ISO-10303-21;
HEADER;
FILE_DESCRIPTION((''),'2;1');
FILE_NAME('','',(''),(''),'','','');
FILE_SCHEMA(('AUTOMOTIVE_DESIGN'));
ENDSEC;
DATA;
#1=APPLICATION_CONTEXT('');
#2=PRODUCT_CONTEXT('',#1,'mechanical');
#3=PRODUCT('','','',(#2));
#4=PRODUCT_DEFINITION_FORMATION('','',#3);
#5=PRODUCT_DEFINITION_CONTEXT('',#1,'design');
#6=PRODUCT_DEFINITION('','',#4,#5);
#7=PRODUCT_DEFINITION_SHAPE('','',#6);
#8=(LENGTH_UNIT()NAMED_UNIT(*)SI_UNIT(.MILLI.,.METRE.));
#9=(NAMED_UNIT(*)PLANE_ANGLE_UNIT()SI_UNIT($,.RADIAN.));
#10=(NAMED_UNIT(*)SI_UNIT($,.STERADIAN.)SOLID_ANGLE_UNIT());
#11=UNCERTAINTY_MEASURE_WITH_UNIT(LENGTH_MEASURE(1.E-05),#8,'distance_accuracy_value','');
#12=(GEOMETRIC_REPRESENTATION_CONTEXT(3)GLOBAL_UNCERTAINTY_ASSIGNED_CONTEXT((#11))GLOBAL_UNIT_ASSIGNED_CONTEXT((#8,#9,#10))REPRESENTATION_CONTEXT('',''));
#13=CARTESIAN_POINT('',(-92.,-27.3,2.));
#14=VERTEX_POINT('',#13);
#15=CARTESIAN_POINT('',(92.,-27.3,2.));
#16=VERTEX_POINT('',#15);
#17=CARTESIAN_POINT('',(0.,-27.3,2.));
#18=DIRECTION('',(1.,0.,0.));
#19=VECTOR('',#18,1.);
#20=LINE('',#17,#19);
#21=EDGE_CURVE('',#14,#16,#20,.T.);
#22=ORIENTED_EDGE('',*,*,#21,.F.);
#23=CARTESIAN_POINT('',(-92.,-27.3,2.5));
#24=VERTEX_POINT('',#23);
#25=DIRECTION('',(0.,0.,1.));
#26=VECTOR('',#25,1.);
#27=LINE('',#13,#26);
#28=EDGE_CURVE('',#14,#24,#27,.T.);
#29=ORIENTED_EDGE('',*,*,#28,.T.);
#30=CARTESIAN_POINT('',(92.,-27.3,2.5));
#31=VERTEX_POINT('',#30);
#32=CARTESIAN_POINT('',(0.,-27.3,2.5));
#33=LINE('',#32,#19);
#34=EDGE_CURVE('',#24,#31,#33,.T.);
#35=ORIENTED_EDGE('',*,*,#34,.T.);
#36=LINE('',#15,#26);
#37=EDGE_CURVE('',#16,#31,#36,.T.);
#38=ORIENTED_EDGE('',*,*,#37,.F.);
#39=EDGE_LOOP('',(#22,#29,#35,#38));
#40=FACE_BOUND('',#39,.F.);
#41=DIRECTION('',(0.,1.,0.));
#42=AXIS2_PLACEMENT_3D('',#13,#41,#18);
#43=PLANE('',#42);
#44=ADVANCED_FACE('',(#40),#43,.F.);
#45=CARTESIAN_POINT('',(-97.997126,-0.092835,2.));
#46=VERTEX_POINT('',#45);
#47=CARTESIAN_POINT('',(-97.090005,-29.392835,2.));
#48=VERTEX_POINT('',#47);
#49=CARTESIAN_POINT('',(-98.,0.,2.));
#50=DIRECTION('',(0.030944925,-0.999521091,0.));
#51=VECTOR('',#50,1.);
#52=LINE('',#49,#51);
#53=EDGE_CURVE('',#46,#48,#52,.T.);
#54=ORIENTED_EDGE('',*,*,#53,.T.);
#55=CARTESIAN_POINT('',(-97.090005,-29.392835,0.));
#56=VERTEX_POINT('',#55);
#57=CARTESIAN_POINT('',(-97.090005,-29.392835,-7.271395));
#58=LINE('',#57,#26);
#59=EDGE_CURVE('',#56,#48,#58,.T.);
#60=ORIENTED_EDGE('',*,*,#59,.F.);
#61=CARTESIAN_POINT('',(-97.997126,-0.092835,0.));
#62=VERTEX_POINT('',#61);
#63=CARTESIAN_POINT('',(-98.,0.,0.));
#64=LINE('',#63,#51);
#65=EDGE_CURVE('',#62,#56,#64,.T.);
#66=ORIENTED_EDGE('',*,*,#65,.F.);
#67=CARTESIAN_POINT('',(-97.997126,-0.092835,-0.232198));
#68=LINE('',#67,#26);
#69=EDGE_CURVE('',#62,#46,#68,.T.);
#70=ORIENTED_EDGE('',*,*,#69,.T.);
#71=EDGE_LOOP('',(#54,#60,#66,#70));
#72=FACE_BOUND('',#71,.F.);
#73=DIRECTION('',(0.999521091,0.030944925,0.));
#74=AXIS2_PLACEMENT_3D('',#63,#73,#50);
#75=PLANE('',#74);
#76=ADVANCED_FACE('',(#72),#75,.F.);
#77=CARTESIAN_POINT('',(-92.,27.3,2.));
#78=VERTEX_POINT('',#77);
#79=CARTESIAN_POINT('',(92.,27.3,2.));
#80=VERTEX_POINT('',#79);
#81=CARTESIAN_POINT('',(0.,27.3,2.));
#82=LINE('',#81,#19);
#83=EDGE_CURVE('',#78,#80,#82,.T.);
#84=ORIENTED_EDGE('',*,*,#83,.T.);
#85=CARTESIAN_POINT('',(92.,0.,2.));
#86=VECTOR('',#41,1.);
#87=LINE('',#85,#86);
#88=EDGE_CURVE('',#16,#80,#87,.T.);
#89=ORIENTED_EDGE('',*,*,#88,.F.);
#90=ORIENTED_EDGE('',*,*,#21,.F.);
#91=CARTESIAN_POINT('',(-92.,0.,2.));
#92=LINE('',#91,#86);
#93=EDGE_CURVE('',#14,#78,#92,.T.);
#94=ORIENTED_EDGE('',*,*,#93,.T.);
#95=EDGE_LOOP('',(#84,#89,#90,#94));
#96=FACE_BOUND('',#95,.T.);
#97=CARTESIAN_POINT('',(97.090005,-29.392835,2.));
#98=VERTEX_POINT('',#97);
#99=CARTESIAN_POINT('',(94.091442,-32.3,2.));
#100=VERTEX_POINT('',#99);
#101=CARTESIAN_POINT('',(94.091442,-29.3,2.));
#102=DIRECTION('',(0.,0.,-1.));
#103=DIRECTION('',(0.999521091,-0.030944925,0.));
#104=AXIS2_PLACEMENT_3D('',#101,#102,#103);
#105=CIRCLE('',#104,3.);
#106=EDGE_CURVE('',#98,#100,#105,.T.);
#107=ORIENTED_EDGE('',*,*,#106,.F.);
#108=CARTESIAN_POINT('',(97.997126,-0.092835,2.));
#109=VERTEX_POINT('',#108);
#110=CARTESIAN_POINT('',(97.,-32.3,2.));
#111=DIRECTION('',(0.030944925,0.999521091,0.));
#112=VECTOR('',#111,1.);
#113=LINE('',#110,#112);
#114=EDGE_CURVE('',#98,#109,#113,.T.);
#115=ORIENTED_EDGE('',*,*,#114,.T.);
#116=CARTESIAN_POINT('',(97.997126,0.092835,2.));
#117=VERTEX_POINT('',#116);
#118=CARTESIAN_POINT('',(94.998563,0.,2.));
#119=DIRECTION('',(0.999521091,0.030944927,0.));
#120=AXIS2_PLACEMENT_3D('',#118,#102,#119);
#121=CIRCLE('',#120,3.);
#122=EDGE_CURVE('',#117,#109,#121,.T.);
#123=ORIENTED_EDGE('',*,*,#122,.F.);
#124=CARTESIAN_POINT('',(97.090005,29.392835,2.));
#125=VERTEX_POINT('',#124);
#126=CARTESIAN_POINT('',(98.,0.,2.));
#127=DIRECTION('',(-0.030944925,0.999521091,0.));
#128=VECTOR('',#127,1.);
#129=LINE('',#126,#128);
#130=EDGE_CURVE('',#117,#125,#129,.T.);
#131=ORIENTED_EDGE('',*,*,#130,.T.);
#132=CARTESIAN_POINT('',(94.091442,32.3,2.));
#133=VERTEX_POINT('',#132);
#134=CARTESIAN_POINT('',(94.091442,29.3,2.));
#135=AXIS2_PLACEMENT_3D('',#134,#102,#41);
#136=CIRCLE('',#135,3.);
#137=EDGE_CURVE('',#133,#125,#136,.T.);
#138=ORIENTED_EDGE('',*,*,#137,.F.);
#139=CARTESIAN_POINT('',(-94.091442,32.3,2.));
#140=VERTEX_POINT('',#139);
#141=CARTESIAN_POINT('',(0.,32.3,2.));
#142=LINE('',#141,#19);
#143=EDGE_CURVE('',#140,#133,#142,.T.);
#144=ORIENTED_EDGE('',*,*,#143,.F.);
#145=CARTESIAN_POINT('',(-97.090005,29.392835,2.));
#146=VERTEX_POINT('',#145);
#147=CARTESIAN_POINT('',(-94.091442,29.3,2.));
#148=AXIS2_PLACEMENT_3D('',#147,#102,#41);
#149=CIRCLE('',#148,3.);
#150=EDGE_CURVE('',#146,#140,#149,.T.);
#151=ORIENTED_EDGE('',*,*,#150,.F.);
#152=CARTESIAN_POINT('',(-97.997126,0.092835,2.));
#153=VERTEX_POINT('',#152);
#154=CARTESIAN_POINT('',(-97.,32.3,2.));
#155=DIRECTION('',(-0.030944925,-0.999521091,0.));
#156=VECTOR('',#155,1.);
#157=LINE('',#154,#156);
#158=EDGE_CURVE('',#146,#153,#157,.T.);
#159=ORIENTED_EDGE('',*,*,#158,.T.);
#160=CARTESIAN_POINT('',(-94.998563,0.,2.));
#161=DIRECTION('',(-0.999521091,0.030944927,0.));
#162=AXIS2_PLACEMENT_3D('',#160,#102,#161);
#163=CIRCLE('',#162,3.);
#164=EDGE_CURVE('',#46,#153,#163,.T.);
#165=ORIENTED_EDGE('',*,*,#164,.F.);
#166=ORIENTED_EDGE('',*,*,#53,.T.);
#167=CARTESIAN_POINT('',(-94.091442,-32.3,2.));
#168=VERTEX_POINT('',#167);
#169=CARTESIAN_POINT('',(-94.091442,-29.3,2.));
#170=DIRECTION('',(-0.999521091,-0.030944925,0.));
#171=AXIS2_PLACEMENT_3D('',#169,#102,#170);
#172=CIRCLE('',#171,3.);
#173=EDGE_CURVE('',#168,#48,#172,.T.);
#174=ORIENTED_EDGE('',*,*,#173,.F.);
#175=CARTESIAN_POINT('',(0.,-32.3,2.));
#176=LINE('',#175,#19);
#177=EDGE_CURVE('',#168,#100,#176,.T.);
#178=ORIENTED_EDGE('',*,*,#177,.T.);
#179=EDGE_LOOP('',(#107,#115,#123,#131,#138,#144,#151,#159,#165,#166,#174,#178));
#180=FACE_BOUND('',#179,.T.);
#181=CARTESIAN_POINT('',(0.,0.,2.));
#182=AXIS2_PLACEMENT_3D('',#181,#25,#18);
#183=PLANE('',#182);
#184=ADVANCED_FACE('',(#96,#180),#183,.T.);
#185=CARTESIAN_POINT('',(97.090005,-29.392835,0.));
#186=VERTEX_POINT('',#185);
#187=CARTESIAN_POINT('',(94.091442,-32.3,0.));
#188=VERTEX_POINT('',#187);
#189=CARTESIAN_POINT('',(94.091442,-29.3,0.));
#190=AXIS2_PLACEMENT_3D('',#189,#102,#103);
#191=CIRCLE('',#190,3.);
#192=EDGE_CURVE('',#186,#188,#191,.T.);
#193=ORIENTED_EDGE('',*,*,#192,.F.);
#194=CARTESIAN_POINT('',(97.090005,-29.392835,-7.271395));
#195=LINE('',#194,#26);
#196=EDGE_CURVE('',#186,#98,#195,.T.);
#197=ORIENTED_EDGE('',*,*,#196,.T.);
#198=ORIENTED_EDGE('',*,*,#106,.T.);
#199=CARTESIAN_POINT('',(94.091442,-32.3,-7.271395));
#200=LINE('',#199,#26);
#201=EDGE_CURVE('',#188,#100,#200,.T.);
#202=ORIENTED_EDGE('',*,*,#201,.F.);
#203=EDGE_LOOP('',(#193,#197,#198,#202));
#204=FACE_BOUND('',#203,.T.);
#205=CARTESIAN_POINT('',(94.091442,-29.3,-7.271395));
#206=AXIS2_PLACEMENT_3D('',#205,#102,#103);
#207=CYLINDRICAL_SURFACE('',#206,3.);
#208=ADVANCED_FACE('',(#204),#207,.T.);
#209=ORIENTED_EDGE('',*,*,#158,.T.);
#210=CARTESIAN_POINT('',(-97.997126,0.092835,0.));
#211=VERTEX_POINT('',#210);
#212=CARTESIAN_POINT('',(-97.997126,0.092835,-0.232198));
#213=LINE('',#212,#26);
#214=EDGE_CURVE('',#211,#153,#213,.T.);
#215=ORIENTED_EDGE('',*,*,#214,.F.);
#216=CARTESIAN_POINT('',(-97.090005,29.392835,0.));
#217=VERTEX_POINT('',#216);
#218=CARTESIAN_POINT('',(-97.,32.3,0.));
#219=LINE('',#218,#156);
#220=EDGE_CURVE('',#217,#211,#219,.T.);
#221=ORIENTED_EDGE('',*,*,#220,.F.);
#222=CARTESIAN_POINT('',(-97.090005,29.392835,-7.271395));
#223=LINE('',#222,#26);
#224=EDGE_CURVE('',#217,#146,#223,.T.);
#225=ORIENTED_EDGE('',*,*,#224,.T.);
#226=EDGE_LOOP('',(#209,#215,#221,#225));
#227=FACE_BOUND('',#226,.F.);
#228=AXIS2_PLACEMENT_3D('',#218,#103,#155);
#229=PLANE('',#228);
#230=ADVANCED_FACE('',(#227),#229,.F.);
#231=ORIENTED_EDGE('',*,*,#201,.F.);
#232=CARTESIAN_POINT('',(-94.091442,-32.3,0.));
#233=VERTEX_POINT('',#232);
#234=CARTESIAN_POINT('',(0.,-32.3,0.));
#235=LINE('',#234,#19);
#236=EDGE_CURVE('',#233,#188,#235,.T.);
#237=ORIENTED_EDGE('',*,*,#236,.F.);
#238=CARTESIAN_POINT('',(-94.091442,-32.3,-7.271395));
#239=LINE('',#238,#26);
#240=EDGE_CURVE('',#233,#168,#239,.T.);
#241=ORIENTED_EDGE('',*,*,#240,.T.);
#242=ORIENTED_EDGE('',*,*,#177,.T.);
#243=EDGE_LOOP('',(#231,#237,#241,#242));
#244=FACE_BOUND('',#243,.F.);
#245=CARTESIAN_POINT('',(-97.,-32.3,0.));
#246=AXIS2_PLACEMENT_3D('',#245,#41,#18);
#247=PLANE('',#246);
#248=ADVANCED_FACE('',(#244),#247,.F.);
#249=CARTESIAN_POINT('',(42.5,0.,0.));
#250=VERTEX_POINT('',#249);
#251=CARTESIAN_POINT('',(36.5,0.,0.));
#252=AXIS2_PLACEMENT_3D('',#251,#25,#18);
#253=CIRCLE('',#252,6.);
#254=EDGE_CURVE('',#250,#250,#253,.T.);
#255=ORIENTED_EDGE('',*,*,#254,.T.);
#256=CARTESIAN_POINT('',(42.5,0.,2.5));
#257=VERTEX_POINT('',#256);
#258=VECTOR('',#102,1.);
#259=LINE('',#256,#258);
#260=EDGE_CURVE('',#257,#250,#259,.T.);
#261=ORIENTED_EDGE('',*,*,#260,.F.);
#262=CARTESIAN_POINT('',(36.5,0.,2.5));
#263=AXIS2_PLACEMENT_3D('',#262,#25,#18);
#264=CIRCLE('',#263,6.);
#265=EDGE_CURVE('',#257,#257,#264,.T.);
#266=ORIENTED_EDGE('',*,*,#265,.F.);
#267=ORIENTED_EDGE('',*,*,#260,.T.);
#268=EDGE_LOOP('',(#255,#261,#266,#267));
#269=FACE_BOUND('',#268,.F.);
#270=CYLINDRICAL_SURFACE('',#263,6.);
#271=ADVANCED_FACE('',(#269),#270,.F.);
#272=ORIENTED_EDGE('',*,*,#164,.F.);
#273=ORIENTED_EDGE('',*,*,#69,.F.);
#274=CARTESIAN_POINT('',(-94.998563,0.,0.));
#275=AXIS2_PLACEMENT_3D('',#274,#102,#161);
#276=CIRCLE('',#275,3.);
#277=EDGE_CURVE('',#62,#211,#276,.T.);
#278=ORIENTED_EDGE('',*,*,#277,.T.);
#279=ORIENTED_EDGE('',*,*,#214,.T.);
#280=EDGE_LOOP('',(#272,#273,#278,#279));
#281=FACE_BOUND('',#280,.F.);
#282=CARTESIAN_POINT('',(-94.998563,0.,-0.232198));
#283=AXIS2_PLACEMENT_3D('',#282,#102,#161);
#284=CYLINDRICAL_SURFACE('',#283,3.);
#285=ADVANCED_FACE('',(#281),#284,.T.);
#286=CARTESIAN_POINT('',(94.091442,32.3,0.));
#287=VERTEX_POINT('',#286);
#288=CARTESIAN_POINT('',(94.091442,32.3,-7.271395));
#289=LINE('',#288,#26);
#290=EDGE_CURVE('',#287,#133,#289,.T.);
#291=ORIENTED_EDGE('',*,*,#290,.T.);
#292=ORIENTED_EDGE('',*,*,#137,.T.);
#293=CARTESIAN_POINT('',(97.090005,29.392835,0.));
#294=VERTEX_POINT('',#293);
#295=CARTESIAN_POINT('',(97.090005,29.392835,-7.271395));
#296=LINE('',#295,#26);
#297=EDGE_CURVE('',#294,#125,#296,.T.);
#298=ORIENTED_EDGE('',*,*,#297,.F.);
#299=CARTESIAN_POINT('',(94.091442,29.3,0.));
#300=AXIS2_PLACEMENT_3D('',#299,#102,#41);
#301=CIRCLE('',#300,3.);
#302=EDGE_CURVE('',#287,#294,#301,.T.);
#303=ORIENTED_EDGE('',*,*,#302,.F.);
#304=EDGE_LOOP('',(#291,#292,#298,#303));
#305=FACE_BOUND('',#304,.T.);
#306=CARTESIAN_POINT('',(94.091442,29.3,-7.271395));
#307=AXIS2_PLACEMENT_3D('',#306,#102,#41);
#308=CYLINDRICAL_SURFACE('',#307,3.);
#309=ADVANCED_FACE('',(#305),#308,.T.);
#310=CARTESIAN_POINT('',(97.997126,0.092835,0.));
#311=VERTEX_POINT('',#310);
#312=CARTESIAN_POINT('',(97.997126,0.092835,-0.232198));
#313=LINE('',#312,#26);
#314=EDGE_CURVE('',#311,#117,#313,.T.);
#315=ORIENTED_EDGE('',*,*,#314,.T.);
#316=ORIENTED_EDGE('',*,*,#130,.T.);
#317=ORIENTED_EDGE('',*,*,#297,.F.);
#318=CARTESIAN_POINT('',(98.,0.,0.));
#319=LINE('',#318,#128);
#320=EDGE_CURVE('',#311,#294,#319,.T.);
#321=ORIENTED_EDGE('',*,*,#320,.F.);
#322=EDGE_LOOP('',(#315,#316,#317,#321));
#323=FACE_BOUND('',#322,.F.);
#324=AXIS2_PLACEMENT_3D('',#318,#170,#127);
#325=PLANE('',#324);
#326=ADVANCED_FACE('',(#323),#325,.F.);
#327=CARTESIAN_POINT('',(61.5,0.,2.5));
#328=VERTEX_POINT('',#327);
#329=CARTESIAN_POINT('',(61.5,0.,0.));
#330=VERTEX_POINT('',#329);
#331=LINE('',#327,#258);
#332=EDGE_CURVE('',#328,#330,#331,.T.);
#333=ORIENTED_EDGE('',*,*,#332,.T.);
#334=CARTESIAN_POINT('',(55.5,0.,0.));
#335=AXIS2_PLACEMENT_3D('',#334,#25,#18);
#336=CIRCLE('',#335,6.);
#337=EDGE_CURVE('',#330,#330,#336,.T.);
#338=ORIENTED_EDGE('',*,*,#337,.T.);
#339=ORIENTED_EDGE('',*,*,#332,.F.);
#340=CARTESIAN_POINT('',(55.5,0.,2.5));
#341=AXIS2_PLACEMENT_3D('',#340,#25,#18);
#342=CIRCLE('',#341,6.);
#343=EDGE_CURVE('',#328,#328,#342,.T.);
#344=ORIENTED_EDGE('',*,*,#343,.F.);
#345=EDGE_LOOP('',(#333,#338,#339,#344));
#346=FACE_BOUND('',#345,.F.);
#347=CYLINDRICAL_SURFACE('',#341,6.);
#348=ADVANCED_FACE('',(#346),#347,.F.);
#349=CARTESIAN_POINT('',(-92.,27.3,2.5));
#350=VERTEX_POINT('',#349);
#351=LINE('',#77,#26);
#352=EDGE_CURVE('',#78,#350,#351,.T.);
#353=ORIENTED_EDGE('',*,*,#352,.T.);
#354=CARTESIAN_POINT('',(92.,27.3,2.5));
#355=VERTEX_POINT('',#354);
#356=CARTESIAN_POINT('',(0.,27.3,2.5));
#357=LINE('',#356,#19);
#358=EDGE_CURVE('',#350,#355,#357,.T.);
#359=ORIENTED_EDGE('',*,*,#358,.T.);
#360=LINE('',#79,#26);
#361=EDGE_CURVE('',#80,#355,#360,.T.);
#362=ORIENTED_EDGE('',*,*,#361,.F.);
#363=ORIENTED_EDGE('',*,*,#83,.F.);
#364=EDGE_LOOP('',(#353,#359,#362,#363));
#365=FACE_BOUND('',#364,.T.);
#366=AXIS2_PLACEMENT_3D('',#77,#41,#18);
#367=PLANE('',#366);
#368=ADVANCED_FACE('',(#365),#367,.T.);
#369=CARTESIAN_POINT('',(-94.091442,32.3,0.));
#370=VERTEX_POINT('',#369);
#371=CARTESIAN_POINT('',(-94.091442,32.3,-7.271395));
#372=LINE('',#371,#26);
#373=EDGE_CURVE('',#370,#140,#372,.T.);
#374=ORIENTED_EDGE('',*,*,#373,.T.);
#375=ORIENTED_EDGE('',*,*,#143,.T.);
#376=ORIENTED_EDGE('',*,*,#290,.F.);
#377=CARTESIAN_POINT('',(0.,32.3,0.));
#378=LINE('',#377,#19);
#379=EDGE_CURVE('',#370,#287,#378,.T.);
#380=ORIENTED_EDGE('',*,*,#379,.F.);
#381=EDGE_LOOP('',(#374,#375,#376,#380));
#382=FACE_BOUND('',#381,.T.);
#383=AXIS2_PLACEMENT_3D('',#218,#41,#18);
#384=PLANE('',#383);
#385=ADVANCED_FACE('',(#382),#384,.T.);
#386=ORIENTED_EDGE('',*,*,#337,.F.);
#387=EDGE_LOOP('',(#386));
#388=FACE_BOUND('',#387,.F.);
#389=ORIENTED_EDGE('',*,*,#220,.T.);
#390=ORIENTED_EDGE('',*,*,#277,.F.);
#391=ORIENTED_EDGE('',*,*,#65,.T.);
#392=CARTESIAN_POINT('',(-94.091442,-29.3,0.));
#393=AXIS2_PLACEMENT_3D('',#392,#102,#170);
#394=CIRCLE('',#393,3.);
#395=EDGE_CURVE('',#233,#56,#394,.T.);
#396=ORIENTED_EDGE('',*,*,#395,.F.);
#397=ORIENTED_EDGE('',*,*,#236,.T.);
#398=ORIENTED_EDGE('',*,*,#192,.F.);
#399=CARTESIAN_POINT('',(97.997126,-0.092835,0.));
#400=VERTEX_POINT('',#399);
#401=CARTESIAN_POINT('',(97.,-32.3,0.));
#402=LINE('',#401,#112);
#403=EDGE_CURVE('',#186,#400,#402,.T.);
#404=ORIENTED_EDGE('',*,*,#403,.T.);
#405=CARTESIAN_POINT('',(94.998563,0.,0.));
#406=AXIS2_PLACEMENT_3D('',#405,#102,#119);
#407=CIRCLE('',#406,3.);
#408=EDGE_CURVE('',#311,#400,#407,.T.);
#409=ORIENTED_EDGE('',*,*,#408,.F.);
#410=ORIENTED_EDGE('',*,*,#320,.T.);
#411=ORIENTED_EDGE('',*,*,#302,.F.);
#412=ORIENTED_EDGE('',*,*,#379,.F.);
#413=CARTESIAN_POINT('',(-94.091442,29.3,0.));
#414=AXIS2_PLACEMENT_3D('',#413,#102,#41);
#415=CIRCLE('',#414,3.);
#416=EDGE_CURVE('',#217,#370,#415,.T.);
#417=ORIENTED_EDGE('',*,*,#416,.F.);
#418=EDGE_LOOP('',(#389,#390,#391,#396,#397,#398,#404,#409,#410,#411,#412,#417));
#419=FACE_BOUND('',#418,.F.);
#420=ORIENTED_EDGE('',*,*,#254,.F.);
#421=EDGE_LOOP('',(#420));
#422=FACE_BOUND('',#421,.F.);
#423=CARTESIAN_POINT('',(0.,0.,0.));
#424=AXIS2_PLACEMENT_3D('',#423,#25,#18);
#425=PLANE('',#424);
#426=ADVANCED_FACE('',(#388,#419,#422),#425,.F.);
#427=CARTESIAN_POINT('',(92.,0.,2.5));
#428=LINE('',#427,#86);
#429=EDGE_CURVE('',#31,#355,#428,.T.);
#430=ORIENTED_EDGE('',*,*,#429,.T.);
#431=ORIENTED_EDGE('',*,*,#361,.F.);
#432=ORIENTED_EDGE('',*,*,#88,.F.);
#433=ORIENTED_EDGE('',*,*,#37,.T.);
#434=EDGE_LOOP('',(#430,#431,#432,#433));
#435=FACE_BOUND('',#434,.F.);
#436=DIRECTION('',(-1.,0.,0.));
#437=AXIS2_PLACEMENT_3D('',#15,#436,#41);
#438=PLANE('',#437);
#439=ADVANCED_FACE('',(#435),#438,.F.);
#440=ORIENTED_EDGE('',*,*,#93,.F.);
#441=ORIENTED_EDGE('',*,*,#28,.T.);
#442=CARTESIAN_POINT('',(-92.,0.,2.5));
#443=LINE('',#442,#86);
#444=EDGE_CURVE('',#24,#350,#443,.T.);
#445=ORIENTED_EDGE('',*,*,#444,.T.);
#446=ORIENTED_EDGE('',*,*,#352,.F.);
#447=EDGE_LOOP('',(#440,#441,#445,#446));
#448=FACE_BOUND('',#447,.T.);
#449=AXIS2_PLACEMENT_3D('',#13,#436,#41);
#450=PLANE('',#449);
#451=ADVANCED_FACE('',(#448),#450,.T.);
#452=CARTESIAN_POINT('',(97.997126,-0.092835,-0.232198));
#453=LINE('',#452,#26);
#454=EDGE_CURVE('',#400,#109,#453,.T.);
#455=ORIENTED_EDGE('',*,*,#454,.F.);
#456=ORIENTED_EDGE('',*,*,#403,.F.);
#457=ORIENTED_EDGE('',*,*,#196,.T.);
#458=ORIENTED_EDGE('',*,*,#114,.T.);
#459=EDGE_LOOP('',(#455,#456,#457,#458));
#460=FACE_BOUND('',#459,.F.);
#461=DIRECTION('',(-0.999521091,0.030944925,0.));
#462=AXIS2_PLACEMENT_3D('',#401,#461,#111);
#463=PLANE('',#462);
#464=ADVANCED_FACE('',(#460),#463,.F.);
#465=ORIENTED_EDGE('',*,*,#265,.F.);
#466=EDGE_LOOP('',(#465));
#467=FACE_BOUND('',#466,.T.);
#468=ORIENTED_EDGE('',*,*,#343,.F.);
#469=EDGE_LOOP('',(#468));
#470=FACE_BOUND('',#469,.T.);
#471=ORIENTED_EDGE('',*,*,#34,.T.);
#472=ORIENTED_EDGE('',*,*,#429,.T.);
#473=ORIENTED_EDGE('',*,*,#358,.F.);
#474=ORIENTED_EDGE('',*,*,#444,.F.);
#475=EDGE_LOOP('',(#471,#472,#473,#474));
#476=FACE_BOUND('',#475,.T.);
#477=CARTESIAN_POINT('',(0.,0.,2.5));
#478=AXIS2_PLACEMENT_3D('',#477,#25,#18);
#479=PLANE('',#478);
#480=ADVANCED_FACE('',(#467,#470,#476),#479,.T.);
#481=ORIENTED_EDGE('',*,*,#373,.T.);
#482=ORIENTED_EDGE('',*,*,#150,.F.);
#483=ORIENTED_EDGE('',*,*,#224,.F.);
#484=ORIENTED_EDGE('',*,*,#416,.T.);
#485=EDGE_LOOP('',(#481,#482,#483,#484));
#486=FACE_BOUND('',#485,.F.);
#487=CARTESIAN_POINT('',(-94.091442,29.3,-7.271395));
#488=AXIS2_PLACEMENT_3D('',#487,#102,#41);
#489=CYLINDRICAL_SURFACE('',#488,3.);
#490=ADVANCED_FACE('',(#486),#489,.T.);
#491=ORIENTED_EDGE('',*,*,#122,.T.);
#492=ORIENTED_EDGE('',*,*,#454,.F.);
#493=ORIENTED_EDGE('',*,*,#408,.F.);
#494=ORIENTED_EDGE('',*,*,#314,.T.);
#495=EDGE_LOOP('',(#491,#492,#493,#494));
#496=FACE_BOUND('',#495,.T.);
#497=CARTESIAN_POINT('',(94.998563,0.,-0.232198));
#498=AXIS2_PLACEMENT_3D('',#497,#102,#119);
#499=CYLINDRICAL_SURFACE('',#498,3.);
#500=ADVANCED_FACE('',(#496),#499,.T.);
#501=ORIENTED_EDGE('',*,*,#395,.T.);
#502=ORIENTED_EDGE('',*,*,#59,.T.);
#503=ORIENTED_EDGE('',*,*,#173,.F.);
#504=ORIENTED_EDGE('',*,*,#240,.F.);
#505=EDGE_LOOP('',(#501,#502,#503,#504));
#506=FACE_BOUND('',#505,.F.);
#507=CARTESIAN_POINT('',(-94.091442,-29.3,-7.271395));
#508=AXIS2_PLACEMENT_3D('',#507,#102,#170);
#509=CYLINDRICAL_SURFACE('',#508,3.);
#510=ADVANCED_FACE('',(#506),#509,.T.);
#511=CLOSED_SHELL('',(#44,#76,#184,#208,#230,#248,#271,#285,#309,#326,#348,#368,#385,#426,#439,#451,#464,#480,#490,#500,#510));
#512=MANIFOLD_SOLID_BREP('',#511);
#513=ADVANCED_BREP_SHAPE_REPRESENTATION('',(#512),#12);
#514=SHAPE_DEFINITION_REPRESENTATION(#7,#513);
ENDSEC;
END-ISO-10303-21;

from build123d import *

# Parameters (mm, degrees)
F0_W        = 194
F0_H        = 64.6
F1_DEPTH    = 2
F2_W        = 184
F2_H        = 54.6
F3_DEPTH    = 0.5
F4_R        = 6
F5_DEPTH    = 25
F6_T1_DEPTH = 16.5427907903
F6_T3_DEPTH = 2.4643962848


# Not quite as in the source:
# - a fillet or chamfer that OpenCascade refuses, or shapes differently, is made with other operations: its cross-section is extruded or revolved along the edge and cut away or added


with BuildPart() as f1:
    # F0 (on Top) → F1 (new body)
    with BuildSketch(Plane.XY):
        Rectangle(F0_W, F0_H)
        Polygon((98, 0), (97, 32.3), (97, -32.3), align=None)
        Polygon((-97, -32.3), (-97, 32.3), (-98, 0), align=None)
    extrude(amount=F1_DEPTH)

    # F2 (on face) → F3 (join)
    with BuildSketch(Plane.XY.offset(2)):
        Rectangle(F2_W, F2_H)
    extrude(amount=F3_DEPTH)

    # F4 (on face) → F5 (cut)
    with BuildSketch(Plane.XY.offset(2.5)):
        with Locations((36.5, 0)):
            Circle(F4_R)
        with Locations((55.5, 0)):
            Circle(F4_R)
    extrude(amount=-F5_DEPTH, mode=Mode.SUBTRACT)

    # F6: fillet of radius 3 on 6 edges, made by hand

    # F6_s2 → F6_t1 (cut)
    with BuildSketch(Plane.XY.offset(-7.2713953952)):
        with BuildLine():
            ThreePointArc((97.0900051153, -29.3928347763), (96.1796822102, -31.4538923289), (94.0914418419, -32.3))
            Line((94.0914418419, -32.3), (97, -32.3))
            Line((97, -32.3), (97.0900051153, -29.3928347763))
        make_face()
        with BuildLine():
            ThreePointArc((94.0914418419, 32.3), (96.1796822102, 31.4538923289), (97.0900051153, 29.3928347763))
            Line((97.0900051153, 29.3928347763), (97, 32.3))
            Line((97, 32.3), (94.0914418419, 32.3))
        make_face()
        with BuildLine():
            ThreePointArc((-94.0914418419, 32.3), (-96.1796822102, 31.4538923289), (-97.0900051153, 29.3928347763))
            Line((-97.0900051153, 29.3928347763), (-97, 32.3))
            Line((-97, 32.3), (-94.0914418419, 32.3))
        make_face()
        with BuildLine():
            ThreePointArc((-97.0900051153, -29.3928347763), (-96.1796822102, -31.4538923289), (-94.0914418419, -32.3))
            Line((-94.0914418419, -32.3), (-97, -32.3))
            Line((-97, -32.3), (-97.0900051153, -29.3928347763))
        make_face()
    extrude(amount=F6_T1_DEPTH, mode=Mode.SUBTRACT)

    # F6_s4 → F6_t3 (cut)
    with BuildSketch(Plane.XY.offset(-0.2321981424)):
        with BuildLine():
            ThreePointArc((-97.9971258583, 0.0928347763), (-97.998562585, 0), (-97.9971258583, -0.0928347763))
            Line((-97.9971258583, -0.0928347763), (-98, 0))
            Line((-98, 0), (-97.9971258583, 0.0928347763))
        make_face()
        with BuildLine():
            ThreePointArc((97.9971258583, 0.0928347763), (97.998562585, 0), (97.9971258583, -0.0928347763))
            Line((97.9971258583, -0.0928347763), (98, 0))
            Line((98, 0), (97.9971258583, 0.0928347763))
        make_face()
    extrude(amount=F6_T3_DEPTH, mode=Mode.SUBTRACT)


solid = f1.part
